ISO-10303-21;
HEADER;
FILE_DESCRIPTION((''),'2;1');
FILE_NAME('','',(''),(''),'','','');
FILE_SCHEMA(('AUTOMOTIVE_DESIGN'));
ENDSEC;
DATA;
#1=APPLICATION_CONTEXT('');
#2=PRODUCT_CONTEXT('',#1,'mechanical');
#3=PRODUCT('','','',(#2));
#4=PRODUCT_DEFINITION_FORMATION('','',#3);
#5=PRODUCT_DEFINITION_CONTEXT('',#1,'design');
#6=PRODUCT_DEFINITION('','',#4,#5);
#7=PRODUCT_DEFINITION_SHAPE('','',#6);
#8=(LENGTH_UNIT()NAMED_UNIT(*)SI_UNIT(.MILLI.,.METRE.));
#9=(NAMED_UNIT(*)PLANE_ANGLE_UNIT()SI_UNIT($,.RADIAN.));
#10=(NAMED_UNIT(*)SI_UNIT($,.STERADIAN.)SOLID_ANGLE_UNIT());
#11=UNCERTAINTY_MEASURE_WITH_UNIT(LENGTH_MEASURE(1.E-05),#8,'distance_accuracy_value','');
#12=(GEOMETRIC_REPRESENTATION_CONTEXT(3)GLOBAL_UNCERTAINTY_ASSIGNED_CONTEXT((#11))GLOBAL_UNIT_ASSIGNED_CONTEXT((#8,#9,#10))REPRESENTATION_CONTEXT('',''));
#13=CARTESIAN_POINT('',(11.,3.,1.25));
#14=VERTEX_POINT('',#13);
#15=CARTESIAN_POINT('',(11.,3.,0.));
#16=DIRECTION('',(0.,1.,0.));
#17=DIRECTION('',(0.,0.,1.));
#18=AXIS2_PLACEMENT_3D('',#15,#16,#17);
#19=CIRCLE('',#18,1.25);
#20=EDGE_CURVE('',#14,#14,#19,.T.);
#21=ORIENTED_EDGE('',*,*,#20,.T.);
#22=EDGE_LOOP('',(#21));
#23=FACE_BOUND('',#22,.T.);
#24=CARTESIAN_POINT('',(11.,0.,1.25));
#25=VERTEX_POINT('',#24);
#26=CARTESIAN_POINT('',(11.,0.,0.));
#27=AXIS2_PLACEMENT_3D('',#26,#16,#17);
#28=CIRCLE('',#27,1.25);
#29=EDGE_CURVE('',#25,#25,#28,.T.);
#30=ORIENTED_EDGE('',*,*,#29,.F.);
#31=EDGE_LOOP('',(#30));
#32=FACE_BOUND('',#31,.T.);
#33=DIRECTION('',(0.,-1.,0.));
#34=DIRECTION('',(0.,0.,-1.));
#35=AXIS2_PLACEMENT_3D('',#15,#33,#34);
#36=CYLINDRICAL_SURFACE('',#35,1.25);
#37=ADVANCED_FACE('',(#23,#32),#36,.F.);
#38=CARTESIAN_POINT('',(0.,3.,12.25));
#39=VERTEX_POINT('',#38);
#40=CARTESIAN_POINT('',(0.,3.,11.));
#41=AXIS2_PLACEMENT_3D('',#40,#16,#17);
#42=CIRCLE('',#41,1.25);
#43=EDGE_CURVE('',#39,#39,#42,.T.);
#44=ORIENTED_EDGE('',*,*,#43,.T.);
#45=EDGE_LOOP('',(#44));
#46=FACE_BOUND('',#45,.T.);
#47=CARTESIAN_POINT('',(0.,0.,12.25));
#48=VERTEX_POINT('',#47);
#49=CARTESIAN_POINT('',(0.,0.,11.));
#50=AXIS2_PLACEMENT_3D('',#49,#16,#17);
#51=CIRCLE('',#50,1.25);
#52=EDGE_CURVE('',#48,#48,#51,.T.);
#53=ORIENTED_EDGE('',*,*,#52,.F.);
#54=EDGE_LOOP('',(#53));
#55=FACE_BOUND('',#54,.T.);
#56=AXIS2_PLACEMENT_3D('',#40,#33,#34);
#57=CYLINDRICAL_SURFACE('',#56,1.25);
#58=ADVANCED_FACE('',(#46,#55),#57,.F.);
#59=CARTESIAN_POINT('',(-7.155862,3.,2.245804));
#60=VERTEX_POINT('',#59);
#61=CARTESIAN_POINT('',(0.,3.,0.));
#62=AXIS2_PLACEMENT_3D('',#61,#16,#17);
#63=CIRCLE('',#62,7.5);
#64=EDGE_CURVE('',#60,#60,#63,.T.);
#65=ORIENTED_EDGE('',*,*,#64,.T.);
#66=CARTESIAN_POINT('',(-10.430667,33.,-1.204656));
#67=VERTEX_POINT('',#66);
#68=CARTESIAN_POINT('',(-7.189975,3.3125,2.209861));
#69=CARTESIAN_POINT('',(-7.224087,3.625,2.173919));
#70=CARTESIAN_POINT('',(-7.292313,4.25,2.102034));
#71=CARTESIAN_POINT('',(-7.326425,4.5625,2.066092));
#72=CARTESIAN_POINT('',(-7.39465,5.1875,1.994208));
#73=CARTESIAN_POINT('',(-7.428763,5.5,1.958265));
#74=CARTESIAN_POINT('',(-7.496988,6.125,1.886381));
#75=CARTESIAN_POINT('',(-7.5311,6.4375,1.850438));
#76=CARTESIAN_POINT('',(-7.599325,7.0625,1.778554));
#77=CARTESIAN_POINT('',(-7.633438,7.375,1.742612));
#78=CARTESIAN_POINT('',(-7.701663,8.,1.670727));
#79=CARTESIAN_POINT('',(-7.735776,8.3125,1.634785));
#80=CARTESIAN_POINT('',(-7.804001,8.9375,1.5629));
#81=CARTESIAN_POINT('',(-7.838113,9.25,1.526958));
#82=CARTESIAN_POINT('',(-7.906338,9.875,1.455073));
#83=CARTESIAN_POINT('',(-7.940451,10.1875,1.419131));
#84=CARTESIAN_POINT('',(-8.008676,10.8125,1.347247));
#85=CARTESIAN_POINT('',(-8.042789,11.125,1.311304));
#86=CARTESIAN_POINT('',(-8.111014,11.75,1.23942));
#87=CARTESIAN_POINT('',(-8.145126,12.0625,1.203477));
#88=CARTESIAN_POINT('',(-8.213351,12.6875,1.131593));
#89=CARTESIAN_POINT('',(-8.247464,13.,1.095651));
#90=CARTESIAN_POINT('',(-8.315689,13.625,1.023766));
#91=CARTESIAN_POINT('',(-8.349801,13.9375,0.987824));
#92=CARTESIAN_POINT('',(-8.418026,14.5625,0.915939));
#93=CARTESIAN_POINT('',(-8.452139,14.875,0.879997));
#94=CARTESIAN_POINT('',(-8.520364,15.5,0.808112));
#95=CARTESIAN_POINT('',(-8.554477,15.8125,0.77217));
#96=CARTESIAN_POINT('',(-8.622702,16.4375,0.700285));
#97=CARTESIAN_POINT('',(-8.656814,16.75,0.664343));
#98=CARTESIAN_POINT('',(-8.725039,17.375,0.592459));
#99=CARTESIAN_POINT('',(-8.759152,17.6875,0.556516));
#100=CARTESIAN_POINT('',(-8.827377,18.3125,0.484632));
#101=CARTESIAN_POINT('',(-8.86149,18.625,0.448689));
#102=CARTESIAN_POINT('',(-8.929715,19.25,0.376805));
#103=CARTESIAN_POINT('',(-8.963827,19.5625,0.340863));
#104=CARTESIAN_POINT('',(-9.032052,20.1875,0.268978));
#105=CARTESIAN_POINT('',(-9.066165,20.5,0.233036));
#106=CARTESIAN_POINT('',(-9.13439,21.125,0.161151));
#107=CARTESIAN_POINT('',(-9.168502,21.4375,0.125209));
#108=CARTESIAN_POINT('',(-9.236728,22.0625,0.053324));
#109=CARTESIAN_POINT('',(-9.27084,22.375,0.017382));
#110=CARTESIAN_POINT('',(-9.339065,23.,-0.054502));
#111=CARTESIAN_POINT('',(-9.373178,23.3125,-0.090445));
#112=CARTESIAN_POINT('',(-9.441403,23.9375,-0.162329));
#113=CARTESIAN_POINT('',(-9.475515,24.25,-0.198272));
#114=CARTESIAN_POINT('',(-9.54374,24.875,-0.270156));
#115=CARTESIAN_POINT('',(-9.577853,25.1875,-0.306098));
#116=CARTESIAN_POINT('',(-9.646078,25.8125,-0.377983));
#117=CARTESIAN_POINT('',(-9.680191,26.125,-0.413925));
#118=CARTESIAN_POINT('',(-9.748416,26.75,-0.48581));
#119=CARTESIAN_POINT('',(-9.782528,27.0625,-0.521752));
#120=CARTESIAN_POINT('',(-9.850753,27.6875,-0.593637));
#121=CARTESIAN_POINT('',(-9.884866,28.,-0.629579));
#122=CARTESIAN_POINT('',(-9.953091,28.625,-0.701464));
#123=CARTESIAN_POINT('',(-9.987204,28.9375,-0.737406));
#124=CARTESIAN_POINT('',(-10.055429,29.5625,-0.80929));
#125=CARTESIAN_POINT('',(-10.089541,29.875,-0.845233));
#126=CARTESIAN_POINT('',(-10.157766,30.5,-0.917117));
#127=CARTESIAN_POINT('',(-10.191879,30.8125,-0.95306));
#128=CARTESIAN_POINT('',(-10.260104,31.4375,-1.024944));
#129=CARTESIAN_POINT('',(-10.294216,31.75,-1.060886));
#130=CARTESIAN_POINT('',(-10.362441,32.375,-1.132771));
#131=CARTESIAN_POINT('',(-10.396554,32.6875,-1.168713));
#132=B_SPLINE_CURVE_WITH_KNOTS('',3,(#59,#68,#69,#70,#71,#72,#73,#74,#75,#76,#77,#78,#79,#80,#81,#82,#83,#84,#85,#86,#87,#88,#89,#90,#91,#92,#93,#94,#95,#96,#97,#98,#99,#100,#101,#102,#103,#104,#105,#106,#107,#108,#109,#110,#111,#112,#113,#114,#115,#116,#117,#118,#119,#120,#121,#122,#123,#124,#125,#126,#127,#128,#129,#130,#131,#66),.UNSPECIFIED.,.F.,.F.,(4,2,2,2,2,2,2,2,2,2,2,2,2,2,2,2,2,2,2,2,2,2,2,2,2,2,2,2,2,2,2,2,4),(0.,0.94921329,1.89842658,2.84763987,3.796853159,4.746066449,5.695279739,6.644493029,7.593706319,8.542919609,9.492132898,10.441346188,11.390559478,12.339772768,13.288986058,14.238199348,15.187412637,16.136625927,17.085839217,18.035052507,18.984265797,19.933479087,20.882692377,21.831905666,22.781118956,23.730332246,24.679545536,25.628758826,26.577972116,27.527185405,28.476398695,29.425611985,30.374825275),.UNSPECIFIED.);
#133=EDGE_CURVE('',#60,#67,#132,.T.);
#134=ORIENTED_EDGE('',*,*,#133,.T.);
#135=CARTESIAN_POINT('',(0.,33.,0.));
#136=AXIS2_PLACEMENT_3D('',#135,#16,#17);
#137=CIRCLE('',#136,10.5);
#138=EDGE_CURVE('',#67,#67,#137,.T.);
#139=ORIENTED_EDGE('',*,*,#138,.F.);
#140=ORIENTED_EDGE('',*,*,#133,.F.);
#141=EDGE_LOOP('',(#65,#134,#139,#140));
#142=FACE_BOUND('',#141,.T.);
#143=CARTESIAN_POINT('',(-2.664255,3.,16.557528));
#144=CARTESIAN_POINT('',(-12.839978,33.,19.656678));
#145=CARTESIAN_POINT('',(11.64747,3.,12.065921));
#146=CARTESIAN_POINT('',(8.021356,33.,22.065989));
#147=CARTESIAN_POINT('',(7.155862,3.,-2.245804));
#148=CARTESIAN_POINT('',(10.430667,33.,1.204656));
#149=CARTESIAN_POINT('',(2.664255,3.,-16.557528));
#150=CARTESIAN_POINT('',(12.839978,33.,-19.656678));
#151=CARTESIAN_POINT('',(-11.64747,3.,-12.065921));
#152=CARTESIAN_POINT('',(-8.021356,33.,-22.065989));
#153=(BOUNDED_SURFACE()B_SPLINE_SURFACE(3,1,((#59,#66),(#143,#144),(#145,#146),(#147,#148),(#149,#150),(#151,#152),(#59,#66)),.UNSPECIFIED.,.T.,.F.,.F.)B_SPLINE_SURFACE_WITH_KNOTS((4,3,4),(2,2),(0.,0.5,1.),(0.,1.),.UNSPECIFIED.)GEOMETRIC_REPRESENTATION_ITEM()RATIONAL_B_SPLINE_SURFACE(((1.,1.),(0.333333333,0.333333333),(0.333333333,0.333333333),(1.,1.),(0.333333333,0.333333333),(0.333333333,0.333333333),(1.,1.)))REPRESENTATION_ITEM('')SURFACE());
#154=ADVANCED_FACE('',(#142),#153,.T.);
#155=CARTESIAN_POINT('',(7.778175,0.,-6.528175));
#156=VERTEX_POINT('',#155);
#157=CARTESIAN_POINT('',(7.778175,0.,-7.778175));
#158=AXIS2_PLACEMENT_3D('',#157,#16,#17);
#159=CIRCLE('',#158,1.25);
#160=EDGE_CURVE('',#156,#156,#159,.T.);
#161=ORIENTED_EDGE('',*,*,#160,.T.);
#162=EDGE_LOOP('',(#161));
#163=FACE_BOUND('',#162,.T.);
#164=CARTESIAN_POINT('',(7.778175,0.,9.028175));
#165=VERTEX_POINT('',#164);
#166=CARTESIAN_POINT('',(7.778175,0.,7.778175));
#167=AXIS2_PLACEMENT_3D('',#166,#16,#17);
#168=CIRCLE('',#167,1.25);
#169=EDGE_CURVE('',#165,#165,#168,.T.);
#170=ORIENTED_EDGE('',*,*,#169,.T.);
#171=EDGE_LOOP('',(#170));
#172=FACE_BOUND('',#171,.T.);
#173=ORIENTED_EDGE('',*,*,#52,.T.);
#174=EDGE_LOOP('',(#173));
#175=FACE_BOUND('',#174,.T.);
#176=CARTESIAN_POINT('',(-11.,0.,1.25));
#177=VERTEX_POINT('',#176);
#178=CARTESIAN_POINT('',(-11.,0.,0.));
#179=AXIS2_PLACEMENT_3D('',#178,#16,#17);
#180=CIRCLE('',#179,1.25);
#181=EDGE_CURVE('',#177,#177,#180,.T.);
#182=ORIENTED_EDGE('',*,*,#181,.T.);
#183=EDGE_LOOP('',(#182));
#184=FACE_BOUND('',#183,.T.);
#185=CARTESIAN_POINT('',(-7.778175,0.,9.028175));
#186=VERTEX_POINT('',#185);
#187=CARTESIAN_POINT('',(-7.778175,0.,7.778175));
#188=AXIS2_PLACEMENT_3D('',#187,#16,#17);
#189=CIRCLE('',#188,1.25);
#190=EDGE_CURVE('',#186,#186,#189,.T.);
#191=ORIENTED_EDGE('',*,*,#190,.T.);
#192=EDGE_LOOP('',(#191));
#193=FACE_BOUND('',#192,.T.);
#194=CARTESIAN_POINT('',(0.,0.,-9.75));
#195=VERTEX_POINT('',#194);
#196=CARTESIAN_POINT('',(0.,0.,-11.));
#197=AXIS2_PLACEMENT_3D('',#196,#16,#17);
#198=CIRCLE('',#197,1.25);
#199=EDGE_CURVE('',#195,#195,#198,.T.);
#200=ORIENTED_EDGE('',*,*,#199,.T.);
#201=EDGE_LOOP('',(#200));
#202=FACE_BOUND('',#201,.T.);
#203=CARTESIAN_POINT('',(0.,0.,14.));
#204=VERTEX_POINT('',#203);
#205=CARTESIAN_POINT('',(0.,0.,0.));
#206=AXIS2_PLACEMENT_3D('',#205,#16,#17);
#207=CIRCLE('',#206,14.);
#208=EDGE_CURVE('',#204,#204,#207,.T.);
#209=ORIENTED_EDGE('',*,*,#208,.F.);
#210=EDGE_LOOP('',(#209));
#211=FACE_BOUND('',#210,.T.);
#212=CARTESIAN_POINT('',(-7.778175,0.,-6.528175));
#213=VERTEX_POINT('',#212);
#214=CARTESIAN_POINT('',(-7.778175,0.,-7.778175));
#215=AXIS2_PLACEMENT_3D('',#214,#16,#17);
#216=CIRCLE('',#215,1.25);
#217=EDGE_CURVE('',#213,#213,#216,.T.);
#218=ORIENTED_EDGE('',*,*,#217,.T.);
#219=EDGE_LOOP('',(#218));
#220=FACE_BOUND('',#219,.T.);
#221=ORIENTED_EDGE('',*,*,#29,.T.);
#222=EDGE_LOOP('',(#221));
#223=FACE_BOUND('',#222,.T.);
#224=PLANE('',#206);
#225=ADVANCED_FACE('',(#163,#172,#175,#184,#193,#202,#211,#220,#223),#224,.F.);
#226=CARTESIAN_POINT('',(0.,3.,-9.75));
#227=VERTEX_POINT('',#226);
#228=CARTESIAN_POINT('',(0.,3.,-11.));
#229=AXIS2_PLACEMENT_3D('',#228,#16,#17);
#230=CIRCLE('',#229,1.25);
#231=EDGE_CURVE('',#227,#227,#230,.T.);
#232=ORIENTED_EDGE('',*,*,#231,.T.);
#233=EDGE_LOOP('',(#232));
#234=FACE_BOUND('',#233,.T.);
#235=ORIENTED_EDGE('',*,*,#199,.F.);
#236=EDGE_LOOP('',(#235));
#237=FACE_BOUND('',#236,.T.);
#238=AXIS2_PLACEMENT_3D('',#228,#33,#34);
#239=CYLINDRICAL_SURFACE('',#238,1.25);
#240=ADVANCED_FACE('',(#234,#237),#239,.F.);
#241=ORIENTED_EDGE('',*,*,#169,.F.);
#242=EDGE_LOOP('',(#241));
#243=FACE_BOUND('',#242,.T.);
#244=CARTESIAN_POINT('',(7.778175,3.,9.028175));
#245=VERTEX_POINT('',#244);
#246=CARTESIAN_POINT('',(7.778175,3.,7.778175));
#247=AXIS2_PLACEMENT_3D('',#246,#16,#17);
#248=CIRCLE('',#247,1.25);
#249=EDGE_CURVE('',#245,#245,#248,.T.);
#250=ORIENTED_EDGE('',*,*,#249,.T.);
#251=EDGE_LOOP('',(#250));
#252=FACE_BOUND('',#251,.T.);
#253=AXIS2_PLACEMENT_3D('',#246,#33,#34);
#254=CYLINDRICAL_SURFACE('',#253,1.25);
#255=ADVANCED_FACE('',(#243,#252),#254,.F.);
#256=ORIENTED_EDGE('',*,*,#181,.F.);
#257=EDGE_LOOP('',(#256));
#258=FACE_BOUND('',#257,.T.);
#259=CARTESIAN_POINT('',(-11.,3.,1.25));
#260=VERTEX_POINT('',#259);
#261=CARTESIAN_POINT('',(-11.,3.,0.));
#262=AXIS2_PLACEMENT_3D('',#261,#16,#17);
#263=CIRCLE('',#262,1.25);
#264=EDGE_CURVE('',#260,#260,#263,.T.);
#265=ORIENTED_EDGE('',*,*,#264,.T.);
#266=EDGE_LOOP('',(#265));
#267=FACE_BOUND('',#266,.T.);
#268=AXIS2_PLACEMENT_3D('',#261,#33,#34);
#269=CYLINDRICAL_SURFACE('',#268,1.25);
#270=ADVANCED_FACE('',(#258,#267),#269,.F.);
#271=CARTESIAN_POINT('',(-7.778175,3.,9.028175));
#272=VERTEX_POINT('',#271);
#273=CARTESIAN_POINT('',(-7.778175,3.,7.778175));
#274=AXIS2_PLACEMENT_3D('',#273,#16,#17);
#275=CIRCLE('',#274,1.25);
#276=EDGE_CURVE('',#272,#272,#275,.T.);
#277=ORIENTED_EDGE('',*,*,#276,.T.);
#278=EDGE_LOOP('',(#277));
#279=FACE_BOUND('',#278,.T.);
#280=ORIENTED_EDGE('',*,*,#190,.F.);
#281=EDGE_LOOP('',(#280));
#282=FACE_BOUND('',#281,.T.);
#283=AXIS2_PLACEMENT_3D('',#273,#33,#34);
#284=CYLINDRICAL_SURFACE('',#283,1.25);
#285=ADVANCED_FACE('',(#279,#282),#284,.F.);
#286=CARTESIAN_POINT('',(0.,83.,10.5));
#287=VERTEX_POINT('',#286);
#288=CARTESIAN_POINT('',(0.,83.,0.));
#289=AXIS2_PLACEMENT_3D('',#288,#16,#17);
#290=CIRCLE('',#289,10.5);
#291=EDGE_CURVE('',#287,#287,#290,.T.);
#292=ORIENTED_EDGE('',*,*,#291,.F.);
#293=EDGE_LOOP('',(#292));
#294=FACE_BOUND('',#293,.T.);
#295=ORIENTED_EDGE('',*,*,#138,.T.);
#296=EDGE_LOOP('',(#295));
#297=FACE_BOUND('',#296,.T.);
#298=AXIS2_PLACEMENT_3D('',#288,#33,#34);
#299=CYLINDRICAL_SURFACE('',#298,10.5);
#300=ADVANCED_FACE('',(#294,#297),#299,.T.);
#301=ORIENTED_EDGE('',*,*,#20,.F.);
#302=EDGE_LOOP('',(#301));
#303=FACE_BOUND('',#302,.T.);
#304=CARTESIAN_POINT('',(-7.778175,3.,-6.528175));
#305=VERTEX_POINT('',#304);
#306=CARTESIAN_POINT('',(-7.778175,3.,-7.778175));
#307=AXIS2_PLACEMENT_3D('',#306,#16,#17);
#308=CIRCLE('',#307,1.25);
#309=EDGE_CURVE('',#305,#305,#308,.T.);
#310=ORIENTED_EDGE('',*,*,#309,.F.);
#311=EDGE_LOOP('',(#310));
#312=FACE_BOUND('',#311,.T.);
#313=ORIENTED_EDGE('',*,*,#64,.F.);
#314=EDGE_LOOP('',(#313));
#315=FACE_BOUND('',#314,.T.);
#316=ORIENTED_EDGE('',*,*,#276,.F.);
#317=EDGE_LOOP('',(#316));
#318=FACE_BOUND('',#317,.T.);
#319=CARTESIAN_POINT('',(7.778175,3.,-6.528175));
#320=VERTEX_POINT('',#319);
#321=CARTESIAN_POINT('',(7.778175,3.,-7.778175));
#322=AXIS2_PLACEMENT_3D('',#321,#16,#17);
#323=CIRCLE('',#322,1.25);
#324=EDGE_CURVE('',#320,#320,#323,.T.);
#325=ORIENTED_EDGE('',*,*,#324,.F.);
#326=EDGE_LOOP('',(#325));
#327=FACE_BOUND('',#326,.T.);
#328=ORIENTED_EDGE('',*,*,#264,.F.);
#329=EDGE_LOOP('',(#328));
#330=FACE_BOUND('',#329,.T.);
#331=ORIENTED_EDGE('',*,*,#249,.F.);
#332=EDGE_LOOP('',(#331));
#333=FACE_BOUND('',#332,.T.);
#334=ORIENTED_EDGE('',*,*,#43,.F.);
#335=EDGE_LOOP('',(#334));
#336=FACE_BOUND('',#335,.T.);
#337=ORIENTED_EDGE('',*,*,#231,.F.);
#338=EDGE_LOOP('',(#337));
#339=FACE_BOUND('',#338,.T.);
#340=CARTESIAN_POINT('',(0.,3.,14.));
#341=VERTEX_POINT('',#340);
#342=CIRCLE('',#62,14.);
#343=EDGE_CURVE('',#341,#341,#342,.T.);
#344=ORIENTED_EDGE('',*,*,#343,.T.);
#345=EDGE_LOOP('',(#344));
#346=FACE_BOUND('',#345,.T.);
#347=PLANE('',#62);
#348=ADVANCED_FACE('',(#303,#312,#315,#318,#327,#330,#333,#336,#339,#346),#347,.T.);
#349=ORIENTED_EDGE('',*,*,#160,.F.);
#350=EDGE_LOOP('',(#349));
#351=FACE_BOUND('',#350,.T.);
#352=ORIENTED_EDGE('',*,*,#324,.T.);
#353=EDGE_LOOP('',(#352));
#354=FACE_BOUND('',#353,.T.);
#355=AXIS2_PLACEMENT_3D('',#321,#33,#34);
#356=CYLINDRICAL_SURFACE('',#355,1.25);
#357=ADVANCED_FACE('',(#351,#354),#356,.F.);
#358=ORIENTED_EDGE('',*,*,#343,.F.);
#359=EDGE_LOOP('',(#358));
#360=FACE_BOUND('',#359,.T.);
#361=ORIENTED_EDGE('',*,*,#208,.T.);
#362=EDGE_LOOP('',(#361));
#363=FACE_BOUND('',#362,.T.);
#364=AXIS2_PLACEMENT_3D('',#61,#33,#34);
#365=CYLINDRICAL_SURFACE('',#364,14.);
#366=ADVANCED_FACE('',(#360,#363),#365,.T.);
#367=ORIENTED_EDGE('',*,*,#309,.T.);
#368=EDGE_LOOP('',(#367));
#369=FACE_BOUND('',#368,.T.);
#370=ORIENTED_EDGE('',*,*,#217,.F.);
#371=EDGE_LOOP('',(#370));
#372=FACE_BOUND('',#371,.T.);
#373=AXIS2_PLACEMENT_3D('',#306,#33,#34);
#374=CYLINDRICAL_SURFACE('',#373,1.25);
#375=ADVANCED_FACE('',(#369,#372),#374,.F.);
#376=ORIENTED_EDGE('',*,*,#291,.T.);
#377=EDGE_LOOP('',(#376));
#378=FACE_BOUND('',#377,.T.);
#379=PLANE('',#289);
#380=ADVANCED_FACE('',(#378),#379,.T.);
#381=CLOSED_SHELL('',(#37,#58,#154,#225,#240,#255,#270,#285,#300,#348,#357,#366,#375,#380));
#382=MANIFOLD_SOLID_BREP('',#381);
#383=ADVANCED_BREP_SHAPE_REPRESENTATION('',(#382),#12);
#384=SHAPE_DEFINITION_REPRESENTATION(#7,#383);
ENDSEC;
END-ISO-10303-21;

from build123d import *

# Parameters (mm, degrees)
ESBO_O1_R                = 14
ESBO_O1_R_2              = 1.25
RESSALTO_EXTRUS_O1_DEPTH = 3
ESBO_O4_R                = 10.5
RESSALTO_EXTRUS_O3_DEPTH = 50


with BuildPart() as part:
    # Esboço1 → Ressalto-extrusão1 (new body)
    with BuildSketch(Plane(origin=(0, 0, 0), x_dir=(1, 0, 0), z_dir=(0, 1, 0))):
        with Locations(Location((0, 0, 0), (0, 0, 270))):
            Circle(ESBO_O1_R)
        with Locations(Location((0, 11, 0), (0, 0, 270))):
            Circle(ESBO_O1_R_2, mode=Mode.SUBTRACT)
        with Locations(Location((7.778174593, 7.778174593, 0), (0, 0, 270))):
            Circle(ESBO_O1_R_2, mode=Mode.SUBTRACT)
        with Locations(Location((11, 0, 0), (0, 0, 270))):
            Circle(ESBO_O1_R_2, mode=Mode.SUBTRACT)
        with Locations(Location((7.778174593, -7.778174593, 0), (0, 0, 270))):
            Circle(ESBO_O1_R_2, mode=Mode.SUBTRACT)
        with Locations(Location((0, -11, 0), (0, 0, 270))):
            Circle(ESBO_O1_R_2, mode=Mode.SUBTRACT)
        with Locations(Location((-7.778174593, -7.778174593, 0), (0, 0, 270))):
            Circle(ESBO_O1_R_2, mode=Mode.SUBTRACT)
        with Locations(Location((-11, 0, 0), (0, 0, 270))):
            Circle(ESBO_O1_R_2, mode=Mode.SUBTRACT)
        with Locations(Location((-7.778174593, 7.778174593, 0), (0, 0, 270))):
            Circle(ESBO_O1_R_2, mode=Mode.SUBTRACT)
    extrude(amount=RESSALTO_EXTRUS_O1_DEPTH)

    # Loft1: read off the stored shape, not the designer's step
    # Loft1: loft between two sections, ruled curve by curve
    loft1_from = [
        Edge.make_bspline([(-7.155862372, 3, 2.245803579), (-2.664255213, 3, 16.557528323), (11.647469531, 3, 12.065921164), (7.155862372, 3, -2.245803579), (2.664255213, 3, -16.557528323), (-11.647469531, 3, -12.065921164), (-7.155862372, 3, 2.245803579)], [0, 0, 0, 0, 0.5, 0.5, 0.5, 1, 1, 1, 1], 3, [1, 0.333333333, 0.333333333, 1, 0.333333333, 0.333333333, 1]),
    ]
    loft1_to = [
        Edge.make_bspline([(-10.43066657, 33, -1.204655513), (-12.839977596, 33, 19.656677627), (8.021355544, 33, 22.065988653), (10.43066657, 33, 1.204655513), (12.839977596, 33, -19.656677627), (-8.021355544, 33, -22.065988653), (-10.43066657, 33, -1.204655513)], [0, 0, 0, 0, 0.5, 0.5, 0.5, 1, 1, 1, 1], 3, [1, 0.333333333, 0.333333333, 1, 0.333333333, 0.333333333, 1]),
    ]
    loft1 = Solid(Shell([*[Face.make_surface_from_curves(loft1_from[k], loft1_to[k]) for k in range(1)], Face(Wire(loft1_from)), Face(Wire(loft1_to))]))
    add(loft1)

    # Esboço4 → Ressalto-extrusão3 (add)
    with BuildSketch(Plane(origin=(0, 33, 0), x_dir=(1, 0, 0), z_dir=(0, 1, 0))):
        with Locations(Location((0, 0, 0), (0, 0, 173.412))):
            Circle(ESBO_O4_R)
    extrude(amount=RESSALTO_EXTRUS_O3_DEPTH)


solid = part.part
